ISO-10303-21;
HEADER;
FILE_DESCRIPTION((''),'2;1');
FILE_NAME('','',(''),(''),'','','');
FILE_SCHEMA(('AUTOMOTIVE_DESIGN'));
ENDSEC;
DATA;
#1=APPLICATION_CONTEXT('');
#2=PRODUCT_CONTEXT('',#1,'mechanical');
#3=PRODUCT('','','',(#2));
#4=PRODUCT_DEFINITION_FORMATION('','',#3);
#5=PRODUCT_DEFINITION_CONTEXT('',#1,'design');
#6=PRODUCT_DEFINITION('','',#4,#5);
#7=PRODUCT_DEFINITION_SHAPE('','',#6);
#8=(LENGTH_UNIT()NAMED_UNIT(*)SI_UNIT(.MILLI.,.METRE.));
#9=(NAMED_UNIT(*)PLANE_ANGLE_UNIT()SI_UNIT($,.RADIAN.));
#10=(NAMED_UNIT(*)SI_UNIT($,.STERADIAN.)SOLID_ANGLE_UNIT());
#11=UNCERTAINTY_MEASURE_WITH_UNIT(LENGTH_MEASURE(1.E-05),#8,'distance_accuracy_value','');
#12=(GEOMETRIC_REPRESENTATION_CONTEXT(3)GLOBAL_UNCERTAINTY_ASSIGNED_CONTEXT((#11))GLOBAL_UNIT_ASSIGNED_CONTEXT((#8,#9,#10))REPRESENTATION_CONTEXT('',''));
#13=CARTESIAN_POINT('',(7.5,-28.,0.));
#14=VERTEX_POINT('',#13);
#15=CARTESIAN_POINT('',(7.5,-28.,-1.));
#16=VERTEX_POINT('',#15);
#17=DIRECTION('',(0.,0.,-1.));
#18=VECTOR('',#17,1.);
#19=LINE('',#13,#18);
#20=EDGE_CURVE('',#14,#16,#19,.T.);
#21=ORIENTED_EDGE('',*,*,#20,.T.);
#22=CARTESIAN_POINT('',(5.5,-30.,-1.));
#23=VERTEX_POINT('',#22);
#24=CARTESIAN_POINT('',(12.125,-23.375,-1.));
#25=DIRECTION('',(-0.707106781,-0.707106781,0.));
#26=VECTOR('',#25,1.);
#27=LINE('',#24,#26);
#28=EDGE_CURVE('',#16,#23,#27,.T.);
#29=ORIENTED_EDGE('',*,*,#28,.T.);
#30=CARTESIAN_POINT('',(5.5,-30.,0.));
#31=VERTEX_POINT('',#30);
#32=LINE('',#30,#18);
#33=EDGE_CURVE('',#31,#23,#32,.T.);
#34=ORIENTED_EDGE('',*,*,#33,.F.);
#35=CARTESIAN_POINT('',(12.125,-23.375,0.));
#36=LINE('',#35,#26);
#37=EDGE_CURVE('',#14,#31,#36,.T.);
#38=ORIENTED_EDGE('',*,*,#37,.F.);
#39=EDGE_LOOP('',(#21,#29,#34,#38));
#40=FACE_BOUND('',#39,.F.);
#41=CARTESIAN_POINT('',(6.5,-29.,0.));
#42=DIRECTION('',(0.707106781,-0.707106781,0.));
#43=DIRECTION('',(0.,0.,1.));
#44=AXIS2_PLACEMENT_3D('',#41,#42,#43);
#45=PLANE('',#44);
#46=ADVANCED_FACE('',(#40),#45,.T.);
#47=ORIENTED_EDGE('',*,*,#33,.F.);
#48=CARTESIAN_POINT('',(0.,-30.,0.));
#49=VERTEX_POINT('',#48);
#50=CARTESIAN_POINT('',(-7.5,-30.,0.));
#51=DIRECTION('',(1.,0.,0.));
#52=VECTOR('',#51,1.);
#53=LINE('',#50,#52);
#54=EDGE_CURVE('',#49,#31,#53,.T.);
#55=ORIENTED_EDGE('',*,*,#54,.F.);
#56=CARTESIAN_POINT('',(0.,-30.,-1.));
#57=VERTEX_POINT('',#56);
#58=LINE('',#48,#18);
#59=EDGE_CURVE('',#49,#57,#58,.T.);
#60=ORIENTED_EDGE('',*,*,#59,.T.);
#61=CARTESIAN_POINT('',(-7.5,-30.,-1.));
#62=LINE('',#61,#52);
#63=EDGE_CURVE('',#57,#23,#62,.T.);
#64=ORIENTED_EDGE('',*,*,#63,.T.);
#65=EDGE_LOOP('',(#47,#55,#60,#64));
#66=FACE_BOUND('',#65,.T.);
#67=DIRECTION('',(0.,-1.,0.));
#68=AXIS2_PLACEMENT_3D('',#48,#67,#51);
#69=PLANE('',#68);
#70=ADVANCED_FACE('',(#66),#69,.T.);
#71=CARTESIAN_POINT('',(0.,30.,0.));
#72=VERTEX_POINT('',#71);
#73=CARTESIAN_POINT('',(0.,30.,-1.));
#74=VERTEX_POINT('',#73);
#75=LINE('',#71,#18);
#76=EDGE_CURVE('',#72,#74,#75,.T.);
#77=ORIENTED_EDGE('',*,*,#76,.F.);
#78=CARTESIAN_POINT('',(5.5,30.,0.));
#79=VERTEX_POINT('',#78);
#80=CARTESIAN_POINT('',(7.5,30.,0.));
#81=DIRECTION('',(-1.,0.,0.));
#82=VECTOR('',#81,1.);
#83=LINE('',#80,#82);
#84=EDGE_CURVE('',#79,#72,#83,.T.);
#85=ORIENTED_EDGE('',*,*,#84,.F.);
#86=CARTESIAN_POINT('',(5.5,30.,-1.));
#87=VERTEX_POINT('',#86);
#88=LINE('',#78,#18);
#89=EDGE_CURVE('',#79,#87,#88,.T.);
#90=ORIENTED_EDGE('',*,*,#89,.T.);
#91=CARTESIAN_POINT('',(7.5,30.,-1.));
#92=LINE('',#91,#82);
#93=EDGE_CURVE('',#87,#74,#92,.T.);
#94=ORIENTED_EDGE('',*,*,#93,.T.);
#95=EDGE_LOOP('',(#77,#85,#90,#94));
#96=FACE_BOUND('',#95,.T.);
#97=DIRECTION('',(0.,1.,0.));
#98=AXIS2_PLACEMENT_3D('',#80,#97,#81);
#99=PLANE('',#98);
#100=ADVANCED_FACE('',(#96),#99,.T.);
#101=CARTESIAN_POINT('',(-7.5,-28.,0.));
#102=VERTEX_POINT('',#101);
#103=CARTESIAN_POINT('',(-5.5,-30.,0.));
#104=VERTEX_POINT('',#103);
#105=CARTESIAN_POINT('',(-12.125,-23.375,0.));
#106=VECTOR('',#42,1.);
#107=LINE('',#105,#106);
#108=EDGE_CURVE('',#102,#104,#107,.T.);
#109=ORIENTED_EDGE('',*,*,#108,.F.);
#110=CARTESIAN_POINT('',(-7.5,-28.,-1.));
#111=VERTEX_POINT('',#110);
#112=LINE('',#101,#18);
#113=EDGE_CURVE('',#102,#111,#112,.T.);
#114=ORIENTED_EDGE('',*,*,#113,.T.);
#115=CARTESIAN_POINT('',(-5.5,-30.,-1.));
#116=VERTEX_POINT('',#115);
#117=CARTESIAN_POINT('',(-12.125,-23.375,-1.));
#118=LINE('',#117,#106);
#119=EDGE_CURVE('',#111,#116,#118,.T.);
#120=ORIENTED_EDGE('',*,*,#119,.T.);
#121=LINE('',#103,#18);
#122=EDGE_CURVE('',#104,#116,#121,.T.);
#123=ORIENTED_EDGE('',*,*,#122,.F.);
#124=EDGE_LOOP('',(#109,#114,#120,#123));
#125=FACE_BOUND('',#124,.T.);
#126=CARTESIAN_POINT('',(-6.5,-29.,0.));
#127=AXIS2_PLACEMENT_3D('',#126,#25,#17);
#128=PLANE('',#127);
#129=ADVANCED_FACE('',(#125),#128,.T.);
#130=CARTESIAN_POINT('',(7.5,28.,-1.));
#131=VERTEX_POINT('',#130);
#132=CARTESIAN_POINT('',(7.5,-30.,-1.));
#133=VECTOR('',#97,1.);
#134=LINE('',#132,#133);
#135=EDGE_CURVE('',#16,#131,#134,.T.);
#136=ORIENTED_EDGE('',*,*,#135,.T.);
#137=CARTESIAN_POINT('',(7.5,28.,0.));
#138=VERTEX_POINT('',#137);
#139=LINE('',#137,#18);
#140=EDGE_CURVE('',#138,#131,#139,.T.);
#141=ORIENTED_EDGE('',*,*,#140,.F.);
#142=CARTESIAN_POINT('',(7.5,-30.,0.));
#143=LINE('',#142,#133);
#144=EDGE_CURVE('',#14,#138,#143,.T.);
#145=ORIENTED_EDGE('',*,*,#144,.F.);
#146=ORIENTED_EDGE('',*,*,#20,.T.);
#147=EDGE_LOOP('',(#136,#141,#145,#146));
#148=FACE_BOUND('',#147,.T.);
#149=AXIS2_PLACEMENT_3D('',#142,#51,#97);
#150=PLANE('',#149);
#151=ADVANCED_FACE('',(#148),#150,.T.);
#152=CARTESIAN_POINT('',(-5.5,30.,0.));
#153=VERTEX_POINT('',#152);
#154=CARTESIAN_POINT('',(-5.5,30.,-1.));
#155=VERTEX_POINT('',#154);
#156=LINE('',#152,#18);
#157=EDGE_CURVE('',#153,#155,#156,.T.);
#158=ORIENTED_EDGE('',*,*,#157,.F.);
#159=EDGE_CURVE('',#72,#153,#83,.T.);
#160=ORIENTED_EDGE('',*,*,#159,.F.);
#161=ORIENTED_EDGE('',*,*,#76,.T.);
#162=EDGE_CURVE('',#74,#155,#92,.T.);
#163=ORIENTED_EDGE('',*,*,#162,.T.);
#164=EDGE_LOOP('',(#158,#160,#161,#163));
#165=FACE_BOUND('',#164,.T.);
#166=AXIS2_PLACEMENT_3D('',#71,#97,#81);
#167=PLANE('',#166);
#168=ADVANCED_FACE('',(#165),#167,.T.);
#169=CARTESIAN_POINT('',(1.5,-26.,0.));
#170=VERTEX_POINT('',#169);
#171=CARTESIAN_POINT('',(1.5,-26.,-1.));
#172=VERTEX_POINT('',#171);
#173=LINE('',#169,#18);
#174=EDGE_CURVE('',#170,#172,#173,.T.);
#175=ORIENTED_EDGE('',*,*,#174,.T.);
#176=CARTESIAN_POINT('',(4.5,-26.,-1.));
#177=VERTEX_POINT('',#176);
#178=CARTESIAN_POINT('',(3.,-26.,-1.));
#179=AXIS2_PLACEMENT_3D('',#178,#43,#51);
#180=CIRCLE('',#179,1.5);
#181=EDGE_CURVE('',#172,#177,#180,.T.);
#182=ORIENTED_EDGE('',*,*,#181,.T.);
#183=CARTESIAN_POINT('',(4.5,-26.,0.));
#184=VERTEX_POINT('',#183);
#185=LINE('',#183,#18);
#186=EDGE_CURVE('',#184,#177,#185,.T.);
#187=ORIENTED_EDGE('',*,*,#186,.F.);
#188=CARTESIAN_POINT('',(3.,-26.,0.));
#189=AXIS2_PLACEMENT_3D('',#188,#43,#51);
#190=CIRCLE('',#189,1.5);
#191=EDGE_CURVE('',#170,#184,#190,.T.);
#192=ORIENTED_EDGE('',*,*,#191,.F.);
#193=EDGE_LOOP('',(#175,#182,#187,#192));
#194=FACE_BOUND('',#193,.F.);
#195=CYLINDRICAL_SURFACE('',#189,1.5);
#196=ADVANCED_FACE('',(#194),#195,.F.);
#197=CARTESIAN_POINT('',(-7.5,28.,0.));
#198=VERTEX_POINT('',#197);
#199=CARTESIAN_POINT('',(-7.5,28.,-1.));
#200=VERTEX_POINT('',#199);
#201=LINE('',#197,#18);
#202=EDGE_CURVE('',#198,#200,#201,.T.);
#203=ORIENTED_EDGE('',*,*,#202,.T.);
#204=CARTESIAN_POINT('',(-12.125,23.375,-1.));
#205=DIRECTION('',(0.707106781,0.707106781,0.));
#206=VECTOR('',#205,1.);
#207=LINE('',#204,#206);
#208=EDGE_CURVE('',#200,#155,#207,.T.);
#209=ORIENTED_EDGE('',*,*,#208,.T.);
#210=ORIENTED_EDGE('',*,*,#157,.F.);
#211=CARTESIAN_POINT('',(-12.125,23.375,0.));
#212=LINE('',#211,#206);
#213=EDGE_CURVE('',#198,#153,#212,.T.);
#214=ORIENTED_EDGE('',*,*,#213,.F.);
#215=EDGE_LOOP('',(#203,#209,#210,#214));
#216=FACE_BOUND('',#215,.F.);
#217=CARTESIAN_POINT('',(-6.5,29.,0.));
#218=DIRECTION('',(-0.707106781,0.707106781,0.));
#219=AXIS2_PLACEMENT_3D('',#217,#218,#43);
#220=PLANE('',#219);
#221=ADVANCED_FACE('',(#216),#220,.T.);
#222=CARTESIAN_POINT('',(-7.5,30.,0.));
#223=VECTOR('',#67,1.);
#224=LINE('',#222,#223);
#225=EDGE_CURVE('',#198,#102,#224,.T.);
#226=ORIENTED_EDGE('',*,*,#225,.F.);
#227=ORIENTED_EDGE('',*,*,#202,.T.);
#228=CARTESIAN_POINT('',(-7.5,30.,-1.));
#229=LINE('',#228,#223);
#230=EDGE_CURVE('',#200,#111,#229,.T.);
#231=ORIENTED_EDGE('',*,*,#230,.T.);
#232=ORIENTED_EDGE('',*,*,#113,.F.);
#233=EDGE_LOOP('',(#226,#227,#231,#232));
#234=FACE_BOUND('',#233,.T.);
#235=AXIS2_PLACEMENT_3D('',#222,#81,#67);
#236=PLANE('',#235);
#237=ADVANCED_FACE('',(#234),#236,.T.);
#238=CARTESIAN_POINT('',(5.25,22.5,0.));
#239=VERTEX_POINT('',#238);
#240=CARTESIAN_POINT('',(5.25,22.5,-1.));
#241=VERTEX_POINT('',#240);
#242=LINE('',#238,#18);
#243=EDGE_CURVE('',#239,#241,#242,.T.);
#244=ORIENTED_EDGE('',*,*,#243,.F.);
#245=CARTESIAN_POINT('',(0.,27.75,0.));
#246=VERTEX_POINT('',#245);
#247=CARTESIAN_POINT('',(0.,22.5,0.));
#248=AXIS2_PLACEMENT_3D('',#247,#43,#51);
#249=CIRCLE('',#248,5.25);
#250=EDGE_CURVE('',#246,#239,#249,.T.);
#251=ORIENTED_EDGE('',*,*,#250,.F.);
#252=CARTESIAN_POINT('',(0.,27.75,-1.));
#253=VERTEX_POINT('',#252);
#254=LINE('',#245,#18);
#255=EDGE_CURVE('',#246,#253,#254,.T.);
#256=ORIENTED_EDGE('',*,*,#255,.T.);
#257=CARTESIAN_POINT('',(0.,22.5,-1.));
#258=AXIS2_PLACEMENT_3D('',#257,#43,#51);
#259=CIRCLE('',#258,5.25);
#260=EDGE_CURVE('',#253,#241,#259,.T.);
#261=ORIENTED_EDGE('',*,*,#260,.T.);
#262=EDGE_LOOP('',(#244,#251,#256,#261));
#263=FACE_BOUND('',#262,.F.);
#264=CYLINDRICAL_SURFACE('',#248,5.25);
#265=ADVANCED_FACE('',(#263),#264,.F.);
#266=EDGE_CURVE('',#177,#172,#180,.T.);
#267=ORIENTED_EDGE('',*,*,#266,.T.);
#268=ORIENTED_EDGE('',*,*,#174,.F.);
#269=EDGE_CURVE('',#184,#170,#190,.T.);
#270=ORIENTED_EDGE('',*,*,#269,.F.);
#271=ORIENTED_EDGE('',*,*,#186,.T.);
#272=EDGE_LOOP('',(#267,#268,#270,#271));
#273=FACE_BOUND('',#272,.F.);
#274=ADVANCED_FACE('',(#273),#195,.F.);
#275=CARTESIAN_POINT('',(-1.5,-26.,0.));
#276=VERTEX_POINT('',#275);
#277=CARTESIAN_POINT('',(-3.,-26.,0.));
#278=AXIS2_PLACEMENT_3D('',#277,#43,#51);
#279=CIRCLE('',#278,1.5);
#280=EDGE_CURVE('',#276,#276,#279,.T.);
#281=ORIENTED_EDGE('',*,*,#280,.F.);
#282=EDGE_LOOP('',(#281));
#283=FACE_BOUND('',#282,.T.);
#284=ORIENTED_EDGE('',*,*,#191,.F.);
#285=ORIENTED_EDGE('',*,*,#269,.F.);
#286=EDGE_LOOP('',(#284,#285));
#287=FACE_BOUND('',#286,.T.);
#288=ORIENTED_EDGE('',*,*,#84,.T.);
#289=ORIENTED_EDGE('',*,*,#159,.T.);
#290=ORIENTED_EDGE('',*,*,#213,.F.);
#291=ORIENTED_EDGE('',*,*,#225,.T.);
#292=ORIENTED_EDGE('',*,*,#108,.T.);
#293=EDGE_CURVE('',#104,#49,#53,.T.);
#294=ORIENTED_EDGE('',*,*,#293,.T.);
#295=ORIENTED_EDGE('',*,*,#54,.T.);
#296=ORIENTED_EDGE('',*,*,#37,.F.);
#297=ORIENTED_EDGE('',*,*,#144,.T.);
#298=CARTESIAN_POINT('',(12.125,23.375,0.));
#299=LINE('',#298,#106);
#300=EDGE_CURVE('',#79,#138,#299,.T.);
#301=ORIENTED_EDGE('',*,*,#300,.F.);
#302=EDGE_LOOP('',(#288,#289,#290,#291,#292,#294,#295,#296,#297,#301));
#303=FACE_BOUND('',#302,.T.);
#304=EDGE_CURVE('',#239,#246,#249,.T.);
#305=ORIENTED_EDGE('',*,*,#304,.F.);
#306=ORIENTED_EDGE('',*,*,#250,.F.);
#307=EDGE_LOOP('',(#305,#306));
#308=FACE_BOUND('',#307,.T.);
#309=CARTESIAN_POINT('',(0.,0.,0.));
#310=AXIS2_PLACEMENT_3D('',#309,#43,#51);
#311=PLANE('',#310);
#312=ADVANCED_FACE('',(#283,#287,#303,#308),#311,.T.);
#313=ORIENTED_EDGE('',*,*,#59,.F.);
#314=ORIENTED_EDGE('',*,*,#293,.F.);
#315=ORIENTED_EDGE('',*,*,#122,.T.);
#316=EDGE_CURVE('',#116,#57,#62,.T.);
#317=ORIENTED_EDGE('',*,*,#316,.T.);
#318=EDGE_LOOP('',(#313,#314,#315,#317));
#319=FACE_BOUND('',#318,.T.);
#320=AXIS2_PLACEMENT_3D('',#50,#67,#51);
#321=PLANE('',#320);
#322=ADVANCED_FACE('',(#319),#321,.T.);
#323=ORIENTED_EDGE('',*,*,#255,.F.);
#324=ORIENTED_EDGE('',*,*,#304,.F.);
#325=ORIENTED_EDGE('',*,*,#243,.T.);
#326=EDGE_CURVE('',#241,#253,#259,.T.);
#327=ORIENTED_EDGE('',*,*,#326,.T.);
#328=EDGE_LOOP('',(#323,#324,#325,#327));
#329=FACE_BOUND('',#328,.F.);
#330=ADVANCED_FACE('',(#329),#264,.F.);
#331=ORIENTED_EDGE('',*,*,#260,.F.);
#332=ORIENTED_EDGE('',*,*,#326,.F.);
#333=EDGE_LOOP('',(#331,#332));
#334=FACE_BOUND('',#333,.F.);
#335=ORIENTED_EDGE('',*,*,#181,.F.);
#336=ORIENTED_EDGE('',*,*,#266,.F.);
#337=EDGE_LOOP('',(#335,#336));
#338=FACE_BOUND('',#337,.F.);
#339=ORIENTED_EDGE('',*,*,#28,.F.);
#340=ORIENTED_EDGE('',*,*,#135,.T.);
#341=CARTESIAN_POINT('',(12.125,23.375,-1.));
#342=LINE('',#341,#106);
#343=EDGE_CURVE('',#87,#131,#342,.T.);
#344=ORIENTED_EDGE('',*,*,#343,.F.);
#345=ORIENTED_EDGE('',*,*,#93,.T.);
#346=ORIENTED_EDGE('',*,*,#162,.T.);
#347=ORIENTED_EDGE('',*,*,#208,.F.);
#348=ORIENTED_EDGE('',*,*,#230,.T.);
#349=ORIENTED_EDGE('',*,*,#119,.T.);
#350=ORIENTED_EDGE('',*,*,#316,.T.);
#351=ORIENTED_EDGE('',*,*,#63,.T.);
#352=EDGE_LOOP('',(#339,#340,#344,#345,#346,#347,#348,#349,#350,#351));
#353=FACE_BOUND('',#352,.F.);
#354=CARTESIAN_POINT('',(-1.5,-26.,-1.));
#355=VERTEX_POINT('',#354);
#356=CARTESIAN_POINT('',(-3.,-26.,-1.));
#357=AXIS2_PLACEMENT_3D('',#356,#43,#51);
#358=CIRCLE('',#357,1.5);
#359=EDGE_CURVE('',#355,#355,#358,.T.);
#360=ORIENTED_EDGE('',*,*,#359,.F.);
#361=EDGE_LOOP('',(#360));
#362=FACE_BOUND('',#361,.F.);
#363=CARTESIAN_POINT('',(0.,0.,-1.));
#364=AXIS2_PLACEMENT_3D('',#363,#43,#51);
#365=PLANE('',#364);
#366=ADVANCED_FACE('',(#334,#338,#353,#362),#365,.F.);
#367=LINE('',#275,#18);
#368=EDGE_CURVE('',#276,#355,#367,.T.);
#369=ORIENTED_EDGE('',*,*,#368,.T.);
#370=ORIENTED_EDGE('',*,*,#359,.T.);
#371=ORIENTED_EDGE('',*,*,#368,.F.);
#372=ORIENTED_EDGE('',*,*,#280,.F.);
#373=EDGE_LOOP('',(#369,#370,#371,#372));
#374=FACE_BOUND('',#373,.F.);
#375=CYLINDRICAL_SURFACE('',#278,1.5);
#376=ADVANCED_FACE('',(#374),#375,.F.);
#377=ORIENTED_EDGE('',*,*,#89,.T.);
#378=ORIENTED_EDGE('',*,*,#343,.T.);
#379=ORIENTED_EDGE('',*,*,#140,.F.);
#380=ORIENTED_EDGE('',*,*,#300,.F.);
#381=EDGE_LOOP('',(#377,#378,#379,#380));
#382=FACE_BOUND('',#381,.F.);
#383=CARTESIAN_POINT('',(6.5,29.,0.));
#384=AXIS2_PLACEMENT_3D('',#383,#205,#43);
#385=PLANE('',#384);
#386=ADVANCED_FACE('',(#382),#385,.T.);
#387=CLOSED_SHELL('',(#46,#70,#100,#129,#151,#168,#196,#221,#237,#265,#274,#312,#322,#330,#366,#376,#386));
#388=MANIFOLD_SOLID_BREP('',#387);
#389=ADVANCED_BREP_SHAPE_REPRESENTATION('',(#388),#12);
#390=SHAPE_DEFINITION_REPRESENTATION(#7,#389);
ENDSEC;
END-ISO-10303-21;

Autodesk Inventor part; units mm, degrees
ref_plane "YZ Plane" through (0, 0, 0) normal (1, 0, 0) x (0, 1, 0)
ref_plane "XZ Plane" through (0, 0, 0) normal (0, 1, 0) x (-1, 0, 0)
ref_plane "XY Plane" through (0, 0, 0) normal (0, 0, 1) x (1, 0, 0)
sketch "Sketch1" plane through (0, 0, 0) normal (0, 0, 1) x (1, 0, 0)
  line L0 (-7.5, -30) -> (7.5, -30)
  line L1 (7.5, -30) -> (7.5, 30)
  line L2 (7.5, 30) -> (-7.5, 30)
  line L3 (-7.5, 30) -> (-7.5, -30)
  line L4 (-7.5, -30) -> (7.5, 30) construction
  line L5 (7.5, -30) -> (-7.5, 30) construction
  line L6 (0, 30) -> (0, 22.5)
  circle A0 centre (0, 22.5) radius 5.25
  line L7 (0, -30) -> (0, -26)
  line L8 (-3, -26) -> (3, -26)
  circle A1 centre (-3, -26) radius 1.5
  circle A2 centre (3, -26) radius 1.5
  point P0 (0, 0)
  dimension "d0" = 15
  dimension "d1" = 60
  dimension "d2" = 7.5
  dimension "d3" = 10.5
  dimension "d6" = 4
  dimension "d7" = 6
  dimension "d8" = 3
  dimension "d9" = 3
extrude "Extrusion1" add sketch "Sketch1" against normal blind 1
chamfer "Chamfer1" distance 2 angle 45 4 edges at (7.5, 30, -0.5) (-7.5, 30, -0.5) (7.5, -30, -0.5) (-7.5, -30, -0.5)
properties part number "Loadcell_lever"
